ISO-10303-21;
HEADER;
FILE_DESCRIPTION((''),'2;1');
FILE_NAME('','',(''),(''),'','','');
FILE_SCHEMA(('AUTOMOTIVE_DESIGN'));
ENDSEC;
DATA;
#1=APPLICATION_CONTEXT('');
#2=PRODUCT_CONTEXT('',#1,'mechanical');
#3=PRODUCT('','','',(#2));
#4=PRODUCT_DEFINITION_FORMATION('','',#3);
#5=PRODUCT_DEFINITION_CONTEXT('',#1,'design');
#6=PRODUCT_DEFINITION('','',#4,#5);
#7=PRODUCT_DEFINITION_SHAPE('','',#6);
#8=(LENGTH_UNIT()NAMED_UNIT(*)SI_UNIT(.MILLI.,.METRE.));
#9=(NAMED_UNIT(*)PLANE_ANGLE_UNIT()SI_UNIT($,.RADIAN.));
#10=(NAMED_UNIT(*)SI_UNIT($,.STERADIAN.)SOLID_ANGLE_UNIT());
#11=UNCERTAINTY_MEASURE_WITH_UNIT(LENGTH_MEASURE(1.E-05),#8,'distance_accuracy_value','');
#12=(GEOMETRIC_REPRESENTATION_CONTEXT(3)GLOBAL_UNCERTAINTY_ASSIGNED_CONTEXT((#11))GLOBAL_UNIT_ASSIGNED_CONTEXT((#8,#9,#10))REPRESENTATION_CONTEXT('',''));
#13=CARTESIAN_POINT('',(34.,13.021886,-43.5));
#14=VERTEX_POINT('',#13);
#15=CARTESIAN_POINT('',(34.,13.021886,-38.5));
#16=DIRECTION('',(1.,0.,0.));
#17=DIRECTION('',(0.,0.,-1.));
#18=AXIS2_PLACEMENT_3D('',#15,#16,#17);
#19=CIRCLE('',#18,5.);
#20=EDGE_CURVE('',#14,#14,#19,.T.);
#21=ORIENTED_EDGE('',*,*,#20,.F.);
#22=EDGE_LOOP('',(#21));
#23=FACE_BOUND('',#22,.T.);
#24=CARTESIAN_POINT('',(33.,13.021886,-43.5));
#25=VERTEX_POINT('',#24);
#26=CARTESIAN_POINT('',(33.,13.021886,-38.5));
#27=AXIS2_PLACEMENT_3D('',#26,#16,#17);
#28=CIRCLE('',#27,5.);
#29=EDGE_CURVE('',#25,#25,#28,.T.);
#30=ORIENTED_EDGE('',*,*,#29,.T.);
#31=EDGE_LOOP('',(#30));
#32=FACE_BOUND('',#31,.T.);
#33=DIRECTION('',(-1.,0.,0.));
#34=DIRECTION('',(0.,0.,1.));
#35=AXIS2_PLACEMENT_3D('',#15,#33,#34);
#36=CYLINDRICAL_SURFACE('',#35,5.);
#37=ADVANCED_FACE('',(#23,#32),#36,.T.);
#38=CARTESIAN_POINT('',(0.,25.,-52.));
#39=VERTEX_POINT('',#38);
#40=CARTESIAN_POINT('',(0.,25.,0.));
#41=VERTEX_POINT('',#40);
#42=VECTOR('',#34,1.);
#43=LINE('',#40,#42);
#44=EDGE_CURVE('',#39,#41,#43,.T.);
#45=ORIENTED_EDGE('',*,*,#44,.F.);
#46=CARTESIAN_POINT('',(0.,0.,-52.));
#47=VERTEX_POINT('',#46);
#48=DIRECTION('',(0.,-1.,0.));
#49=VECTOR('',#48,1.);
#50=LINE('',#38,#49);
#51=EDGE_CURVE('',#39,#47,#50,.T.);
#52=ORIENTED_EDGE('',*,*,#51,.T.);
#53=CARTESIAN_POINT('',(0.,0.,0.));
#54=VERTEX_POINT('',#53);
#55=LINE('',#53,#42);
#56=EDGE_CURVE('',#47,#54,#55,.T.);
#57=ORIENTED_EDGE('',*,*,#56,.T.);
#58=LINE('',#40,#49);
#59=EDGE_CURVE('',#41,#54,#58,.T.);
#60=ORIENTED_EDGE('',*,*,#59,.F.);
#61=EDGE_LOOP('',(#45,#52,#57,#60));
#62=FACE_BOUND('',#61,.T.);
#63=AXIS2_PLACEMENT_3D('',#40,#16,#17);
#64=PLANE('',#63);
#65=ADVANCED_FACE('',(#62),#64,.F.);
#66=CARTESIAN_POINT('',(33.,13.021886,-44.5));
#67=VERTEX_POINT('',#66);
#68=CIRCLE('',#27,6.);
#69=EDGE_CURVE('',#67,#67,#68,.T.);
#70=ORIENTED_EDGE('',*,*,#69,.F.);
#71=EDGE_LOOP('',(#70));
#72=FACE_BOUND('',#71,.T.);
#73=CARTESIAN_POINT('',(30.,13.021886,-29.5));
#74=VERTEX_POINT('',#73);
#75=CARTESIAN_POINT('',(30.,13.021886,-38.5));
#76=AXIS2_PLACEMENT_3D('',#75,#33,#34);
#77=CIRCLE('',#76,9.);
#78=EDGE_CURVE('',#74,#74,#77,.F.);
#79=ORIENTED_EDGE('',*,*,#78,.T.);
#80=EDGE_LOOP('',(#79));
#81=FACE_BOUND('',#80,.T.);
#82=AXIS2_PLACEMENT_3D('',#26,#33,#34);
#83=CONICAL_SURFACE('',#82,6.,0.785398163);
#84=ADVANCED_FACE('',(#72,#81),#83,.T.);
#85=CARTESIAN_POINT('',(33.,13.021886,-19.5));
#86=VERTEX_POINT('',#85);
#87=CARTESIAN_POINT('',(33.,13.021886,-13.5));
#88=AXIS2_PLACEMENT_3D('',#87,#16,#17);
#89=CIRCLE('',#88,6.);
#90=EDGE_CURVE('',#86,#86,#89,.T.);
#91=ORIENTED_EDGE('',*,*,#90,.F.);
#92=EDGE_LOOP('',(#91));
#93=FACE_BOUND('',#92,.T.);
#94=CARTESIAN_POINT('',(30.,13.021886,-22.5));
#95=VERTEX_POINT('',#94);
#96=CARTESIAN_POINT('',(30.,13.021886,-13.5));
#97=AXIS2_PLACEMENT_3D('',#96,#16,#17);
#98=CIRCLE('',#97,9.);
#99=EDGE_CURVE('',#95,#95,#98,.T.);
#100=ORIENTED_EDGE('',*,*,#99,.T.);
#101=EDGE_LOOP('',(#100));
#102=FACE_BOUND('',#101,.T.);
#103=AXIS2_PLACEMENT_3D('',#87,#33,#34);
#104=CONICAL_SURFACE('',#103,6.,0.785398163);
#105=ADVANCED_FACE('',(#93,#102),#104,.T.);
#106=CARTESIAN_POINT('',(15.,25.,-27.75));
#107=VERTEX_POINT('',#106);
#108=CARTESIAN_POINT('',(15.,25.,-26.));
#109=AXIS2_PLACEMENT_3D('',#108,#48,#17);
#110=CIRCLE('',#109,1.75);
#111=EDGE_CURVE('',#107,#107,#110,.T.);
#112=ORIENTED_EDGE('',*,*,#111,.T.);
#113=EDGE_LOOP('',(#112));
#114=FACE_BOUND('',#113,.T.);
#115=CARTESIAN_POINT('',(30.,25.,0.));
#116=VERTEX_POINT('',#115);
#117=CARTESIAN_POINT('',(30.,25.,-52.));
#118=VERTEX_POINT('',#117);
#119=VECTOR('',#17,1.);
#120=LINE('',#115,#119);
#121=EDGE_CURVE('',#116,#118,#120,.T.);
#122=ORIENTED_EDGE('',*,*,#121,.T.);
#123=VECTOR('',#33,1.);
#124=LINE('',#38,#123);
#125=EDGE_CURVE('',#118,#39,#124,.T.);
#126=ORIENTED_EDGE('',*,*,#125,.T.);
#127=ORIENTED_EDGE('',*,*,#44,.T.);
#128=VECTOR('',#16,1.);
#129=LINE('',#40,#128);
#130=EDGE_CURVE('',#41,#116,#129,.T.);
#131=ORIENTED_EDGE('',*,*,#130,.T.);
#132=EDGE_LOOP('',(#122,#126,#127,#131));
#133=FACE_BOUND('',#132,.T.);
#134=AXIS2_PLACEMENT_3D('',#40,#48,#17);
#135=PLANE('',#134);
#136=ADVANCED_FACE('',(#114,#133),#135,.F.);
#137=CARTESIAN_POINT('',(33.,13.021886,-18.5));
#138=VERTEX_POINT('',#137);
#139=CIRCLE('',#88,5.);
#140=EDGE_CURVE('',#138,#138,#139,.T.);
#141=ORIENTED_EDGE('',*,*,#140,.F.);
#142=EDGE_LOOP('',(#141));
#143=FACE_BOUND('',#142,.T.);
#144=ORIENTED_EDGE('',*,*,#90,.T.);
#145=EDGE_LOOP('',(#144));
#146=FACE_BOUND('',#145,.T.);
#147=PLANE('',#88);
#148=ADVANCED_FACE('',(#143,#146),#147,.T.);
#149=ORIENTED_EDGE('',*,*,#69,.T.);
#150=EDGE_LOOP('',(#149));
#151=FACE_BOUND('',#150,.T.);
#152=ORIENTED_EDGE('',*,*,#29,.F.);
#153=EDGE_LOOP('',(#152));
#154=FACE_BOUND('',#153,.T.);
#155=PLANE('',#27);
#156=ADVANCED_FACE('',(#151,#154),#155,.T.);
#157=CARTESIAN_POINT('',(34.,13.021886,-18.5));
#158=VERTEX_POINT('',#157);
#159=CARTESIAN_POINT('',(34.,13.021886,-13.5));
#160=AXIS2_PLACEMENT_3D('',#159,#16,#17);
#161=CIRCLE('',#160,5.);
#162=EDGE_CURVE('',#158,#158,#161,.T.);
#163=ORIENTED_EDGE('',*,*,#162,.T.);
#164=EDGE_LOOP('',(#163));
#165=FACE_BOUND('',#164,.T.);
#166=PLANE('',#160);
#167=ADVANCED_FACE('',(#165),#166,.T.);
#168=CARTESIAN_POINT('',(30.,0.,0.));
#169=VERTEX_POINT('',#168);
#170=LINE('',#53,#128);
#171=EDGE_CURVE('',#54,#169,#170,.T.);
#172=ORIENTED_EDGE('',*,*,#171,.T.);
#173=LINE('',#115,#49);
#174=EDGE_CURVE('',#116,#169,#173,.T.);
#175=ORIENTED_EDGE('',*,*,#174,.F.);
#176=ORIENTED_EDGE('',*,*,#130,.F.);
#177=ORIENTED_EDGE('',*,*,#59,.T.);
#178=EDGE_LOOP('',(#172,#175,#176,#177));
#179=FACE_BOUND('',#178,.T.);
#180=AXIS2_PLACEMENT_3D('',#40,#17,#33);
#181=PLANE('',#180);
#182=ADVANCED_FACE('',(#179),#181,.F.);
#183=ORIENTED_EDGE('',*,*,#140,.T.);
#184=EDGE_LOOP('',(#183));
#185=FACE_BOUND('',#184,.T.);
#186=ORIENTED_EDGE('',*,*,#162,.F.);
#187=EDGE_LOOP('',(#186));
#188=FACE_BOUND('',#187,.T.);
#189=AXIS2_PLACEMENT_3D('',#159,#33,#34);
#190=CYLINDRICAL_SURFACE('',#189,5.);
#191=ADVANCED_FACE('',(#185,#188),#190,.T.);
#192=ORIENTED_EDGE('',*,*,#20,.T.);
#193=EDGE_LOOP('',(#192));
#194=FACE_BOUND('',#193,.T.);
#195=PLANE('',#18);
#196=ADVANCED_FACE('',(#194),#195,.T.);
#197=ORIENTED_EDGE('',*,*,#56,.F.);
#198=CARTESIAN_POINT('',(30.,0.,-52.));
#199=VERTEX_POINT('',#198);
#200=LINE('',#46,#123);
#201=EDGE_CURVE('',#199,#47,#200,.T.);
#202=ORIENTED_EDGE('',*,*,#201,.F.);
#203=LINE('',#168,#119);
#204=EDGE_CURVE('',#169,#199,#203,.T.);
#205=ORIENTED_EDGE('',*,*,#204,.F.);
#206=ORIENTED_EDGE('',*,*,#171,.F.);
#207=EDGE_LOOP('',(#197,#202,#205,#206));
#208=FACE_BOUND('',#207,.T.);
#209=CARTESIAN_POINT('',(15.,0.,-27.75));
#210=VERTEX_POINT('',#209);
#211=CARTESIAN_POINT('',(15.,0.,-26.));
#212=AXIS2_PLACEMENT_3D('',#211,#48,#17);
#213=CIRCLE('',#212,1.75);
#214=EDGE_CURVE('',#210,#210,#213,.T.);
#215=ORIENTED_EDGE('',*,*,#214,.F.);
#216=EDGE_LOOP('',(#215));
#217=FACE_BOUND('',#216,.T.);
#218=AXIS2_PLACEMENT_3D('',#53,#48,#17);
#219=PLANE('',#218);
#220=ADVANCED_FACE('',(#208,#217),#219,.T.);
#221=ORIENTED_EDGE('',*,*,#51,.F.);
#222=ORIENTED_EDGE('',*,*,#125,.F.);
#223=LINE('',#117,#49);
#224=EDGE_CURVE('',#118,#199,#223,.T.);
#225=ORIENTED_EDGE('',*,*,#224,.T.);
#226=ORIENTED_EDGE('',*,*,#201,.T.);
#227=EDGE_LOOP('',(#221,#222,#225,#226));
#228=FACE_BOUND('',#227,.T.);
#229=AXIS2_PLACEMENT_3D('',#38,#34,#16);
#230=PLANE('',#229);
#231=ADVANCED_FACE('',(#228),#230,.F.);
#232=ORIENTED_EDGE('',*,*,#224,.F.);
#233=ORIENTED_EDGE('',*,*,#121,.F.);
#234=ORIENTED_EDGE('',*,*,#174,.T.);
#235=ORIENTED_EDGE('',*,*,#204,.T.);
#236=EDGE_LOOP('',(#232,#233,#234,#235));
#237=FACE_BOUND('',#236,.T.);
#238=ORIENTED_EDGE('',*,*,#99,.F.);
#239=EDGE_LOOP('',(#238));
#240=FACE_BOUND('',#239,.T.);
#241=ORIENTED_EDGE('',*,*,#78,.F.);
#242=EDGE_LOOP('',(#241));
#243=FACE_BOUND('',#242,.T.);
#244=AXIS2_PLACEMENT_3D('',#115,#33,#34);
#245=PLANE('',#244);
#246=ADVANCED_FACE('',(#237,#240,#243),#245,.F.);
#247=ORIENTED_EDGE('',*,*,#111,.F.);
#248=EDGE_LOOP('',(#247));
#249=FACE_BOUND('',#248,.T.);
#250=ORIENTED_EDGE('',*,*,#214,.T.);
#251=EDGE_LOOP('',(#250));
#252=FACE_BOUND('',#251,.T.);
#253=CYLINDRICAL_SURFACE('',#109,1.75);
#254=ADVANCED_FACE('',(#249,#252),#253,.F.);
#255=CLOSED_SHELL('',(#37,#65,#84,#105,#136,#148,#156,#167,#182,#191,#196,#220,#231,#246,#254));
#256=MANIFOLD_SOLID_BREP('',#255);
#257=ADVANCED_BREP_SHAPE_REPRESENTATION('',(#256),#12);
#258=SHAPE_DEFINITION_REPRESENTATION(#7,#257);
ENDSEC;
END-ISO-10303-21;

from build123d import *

# Parameters (mm, degrees)
SKETCH1_W           = 30
SKETCH1_H           = 52
BOSS_EXTRUDE1_DEPTH = 25
SKETCH2_R           = 9
BOSS_EXTRUDE2_DEPTH = 3
CHAMFER1_SIZE       = 3
SKETCH3_R           = 5
BOSS_EXTRUDE3_DEPTH = 1
SKETCH4_R           = 1.75
CUT_EXTRUDE1_DEPTH  = 67.970142601


with BuildPart() as part:
    # Sketch1 → Boss-Extrude1 (new body)
    with BuildSketch(Plane(origin=(0, 0, 0), x_dir=(1, 0, 0), z_dir=(0, 1, 0))):
        with Locations((15, 26)):
            Rectangle(SKETCH1_W, SKETCH1_H)
    extrude(amount=BOSS_EXTRUDE1_DEPTH)

    # Sketch2 → Boss-Extrude2 (add)
    with BuildSketch(Plane(origin=(30, 0, 0), x_dir=(0, 0, -1), z_dir=(1, 0, 0))):
        with Locations((13.5, 13.021886364)):
            Circle(SKETCH2_R)
        with Locations(Location((38.5, 13.021886364, 0), (0, 0, 180))):
            Circle(SKETCH2_R)
    extrude(amount=BOSS_EXTRUDE2_DEPTH)

    # Chamfer1
    chamfer1_edges = [part.edges().sort_by_distance(p)[0] for p in [
        (33, 13.021886364, -4.5),
        (33, 13.021886364, -47.5),
    ]]
    chamfer(chamfer1_edges, length=CHAMFER1_SIZE - 0.0001)  # a hair under: the kernel refuses the full size

    # Sketch3 → Boss-Extrude3 (add)
    with BuildSketch(Plane(origin=(33, 0, 0), x_dir=(0, 0, -1), z_dir=(1, 0, 0))):
        with Locations((38.5, 13.021886364)):
            Circle(SKETCH3_R)
        with Locations((13.5, 13.021886364)):
            Circle(SKETCH3_R)
    extrude(amount=BOSS_EXTRUDE3_DEPTH)

    # Sketch4 → Cut-Extrude1 (cut, through all)
    with BuildSketch(Plane.XZ):
        with Locations(Location((15, -26, 0), (0, 0, 270))):
            Circle(SKETCH4_R)
    extrude(amount=-CUT_EXTRUDE1_DEPTH, mode=Mode.SUBTRACT)


solid = part.part
